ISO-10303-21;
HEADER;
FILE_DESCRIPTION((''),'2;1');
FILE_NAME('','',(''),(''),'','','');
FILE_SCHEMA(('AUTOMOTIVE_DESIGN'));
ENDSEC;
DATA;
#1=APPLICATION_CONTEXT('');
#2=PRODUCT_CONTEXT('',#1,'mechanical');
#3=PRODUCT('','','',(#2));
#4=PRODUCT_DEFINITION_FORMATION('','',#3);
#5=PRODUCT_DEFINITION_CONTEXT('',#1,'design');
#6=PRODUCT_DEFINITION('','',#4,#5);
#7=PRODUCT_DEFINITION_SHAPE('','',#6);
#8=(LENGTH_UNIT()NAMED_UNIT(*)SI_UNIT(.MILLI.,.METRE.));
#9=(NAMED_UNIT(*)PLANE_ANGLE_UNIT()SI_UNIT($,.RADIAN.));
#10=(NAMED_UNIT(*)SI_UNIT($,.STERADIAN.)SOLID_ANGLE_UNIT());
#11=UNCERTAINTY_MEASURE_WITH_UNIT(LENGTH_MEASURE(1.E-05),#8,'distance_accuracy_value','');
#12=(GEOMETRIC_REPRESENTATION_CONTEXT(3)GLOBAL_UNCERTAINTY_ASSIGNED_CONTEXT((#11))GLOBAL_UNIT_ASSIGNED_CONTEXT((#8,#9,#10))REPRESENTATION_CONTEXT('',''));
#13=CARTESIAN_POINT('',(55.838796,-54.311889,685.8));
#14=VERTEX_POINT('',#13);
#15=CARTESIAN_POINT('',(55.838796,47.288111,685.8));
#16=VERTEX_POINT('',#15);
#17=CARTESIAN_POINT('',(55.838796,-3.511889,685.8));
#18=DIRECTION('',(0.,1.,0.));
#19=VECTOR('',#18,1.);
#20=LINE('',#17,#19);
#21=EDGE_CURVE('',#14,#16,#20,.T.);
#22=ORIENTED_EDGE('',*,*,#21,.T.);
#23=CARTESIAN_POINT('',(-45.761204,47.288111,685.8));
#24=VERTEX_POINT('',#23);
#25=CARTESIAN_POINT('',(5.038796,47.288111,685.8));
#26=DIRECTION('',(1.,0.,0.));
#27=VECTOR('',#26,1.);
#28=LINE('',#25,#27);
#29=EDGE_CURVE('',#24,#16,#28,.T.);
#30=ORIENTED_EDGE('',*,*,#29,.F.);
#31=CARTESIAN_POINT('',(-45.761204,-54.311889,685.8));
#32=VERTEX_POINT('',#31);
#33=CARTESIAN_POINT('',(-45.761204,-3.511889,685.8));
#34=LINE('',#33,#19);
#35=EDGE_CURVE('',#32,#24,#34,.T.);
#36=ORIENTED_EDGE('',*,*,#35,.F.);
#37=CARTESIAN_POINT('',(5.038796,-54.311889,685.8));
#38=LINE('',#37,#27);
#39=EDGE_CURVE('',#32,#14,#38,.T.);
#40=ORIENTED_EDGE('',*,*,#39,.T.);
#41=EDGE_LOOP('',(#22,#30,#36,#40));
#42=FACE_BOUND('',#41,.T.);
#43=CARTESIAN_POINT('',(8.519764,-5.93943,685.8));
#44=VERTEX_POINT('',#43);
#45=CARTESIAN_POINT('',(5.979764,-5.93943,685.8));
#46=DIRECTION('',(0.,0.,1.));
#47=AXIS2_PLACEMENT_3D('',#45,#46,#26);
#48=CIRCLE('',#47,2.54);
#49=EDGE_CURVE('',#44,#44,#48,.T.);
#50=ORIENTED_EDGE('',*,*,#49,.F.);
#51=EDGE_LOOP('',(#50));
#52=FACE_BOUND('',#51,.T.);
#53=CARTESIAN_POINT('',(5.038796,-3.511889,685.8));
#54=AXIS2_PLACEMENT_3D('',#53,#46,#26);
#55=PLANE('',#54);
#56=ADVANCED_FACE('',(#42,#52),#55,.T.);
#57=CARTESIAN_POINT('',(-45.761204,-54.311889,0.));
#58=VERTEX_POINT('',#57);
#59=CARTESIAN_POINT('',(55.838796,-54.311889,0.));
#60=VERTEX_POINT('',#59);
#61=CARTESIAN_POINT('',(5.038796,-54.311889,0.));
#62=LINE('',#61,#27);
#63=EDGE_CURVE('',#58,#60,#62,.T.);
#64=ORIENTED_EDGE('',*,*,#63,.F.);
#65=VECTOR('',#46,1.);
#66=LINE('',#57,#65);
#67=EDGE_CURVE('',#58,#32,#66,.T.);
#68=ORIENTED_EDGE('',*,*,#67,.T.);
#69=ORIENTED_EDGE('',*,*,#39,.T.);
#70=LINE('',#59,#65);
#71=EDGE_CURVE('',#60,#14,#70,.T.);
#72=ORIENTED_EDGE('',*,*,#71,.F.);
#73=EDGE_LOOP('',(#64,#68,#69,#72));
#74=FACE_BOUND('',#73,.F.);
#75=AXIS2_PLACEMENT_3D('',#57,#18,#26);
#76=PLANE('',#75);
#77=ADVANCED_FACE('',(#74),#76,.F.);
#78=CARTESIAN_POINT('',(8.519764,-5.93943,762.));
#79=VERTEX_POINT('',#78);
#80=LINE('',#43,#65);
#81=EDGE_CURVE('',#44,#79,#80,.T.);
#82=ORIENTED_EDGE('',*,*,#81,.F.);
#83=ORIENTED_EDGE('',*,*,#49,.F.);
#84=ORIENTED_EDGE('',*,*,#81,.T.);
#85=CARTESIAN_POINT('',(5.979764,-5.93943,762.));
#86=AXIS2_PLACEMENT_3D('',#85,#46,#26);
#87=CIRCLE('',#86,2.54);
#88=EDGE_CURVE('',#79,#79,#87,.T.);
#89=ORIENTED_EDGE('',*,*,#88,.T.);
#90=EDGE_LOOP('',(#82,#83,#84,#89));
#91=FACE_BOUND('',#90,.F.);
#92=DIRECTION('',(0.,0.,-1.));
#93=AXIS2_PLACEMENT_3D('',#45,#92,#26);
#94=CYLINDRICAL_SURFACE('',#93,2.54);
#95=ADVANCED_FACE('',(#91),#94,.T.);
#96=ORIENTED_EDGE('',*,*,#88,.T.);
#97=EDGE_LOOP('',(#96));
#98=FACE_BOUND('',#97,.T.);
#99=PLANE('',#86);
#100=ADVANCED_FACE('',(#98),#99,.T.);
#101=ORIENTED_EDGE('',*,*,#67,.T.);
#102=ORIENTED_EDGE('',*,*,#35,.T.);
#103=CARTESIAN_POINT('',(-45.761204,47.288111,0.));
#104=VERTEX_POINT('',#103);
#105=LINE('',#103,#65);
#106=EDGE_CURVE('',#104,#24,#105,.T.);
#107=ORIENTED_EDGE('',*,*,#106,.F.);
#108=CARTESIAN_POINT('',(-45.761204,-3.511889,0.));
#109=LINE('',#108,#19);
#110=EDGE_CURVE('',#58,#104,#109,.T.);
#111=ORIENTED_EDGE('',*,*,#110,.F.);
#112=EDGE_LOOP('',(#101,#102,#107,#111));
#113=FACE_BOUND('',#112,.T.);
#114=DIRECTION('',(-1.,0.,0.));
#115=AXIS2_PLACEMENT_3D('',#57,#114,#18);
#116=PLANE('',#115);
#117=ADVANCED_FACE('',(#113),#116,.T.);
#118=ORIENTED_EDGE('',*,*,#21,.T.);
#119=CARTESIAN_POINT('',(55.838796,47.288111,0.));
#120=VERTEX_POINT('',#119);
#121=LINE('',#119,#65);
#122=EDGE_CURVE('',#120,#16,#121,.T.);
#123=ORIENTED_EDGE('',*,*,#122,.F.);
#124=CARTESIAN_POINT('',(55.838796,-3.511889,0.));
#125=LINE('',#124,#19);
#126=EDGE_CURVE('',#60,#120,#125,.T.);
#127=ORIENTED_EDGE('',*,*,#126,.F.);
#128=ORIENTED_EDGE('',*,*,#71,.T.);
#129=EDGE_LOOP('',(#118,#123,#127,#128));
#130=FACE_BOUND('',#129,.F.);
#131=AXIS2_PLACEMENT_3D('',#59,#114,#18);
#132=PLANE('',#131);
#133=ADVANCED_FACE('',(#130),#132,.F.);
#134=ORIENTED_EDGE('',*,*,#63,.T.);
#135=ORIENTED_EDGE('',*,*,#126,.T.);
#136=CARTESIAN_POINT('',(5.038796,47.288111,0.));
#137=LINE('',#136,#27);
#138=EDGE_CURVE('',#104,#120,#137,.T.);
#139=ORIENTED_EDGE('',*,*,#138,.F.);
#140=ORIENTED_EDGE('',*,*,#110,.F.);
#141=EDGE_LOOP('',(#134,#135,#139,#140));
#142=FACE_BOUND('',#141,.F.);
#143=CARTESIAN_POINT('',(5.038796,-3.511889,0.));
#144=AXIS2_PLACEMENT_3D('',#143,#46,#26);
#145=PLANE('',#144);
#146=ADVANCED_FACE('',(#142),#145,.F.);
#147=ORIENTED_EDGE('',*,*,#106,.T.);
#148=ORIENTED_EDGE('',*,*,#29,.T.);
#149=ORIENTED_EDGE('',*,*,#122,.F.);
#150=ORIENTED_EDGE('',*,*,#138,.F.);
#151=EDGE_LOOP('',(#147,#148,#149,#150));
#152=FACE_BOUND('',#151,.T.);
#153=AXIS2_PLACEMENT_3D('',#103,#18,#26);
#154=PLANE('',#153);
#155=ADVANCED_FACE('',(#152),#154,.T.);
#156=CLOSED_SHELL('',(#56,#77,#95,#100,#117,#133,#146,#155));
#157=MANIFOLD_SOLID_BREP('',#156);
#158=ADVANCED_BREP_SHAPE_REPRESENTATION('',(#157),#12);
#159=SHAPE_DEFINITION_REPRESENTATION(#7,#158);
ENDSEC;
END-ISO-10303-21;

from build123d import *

# Parameters (mm, degrees)
F0_W     = 101.6
F0_H     = 101.6
F1_DEPTH = 685.8
F2_R     = 2.54
F3_DEPTH = 76.2


# Not quite as in the source:
# - a feature names something its author has since deleted; it is built from what else it names


with BuildPart() as f1:
    # F0 (on Top) → F1 (new body)
    with BuildSketch(Plane.XY):
        with Locations((5.0387959927, -3.5118889064)):
            Rectangle(F0_W, F0_H)
    extrude(amount=F1_DEPTH)

    # F2 (on face) → F3 (join)
    with BuildSketch(Plane.XY.offset(685.8)):
        with Locations((5.9797638096, -5.9394296259)):
            Circle(F2_R)
    extrude(amount=F3_DEPTH)


solid = f1.part
